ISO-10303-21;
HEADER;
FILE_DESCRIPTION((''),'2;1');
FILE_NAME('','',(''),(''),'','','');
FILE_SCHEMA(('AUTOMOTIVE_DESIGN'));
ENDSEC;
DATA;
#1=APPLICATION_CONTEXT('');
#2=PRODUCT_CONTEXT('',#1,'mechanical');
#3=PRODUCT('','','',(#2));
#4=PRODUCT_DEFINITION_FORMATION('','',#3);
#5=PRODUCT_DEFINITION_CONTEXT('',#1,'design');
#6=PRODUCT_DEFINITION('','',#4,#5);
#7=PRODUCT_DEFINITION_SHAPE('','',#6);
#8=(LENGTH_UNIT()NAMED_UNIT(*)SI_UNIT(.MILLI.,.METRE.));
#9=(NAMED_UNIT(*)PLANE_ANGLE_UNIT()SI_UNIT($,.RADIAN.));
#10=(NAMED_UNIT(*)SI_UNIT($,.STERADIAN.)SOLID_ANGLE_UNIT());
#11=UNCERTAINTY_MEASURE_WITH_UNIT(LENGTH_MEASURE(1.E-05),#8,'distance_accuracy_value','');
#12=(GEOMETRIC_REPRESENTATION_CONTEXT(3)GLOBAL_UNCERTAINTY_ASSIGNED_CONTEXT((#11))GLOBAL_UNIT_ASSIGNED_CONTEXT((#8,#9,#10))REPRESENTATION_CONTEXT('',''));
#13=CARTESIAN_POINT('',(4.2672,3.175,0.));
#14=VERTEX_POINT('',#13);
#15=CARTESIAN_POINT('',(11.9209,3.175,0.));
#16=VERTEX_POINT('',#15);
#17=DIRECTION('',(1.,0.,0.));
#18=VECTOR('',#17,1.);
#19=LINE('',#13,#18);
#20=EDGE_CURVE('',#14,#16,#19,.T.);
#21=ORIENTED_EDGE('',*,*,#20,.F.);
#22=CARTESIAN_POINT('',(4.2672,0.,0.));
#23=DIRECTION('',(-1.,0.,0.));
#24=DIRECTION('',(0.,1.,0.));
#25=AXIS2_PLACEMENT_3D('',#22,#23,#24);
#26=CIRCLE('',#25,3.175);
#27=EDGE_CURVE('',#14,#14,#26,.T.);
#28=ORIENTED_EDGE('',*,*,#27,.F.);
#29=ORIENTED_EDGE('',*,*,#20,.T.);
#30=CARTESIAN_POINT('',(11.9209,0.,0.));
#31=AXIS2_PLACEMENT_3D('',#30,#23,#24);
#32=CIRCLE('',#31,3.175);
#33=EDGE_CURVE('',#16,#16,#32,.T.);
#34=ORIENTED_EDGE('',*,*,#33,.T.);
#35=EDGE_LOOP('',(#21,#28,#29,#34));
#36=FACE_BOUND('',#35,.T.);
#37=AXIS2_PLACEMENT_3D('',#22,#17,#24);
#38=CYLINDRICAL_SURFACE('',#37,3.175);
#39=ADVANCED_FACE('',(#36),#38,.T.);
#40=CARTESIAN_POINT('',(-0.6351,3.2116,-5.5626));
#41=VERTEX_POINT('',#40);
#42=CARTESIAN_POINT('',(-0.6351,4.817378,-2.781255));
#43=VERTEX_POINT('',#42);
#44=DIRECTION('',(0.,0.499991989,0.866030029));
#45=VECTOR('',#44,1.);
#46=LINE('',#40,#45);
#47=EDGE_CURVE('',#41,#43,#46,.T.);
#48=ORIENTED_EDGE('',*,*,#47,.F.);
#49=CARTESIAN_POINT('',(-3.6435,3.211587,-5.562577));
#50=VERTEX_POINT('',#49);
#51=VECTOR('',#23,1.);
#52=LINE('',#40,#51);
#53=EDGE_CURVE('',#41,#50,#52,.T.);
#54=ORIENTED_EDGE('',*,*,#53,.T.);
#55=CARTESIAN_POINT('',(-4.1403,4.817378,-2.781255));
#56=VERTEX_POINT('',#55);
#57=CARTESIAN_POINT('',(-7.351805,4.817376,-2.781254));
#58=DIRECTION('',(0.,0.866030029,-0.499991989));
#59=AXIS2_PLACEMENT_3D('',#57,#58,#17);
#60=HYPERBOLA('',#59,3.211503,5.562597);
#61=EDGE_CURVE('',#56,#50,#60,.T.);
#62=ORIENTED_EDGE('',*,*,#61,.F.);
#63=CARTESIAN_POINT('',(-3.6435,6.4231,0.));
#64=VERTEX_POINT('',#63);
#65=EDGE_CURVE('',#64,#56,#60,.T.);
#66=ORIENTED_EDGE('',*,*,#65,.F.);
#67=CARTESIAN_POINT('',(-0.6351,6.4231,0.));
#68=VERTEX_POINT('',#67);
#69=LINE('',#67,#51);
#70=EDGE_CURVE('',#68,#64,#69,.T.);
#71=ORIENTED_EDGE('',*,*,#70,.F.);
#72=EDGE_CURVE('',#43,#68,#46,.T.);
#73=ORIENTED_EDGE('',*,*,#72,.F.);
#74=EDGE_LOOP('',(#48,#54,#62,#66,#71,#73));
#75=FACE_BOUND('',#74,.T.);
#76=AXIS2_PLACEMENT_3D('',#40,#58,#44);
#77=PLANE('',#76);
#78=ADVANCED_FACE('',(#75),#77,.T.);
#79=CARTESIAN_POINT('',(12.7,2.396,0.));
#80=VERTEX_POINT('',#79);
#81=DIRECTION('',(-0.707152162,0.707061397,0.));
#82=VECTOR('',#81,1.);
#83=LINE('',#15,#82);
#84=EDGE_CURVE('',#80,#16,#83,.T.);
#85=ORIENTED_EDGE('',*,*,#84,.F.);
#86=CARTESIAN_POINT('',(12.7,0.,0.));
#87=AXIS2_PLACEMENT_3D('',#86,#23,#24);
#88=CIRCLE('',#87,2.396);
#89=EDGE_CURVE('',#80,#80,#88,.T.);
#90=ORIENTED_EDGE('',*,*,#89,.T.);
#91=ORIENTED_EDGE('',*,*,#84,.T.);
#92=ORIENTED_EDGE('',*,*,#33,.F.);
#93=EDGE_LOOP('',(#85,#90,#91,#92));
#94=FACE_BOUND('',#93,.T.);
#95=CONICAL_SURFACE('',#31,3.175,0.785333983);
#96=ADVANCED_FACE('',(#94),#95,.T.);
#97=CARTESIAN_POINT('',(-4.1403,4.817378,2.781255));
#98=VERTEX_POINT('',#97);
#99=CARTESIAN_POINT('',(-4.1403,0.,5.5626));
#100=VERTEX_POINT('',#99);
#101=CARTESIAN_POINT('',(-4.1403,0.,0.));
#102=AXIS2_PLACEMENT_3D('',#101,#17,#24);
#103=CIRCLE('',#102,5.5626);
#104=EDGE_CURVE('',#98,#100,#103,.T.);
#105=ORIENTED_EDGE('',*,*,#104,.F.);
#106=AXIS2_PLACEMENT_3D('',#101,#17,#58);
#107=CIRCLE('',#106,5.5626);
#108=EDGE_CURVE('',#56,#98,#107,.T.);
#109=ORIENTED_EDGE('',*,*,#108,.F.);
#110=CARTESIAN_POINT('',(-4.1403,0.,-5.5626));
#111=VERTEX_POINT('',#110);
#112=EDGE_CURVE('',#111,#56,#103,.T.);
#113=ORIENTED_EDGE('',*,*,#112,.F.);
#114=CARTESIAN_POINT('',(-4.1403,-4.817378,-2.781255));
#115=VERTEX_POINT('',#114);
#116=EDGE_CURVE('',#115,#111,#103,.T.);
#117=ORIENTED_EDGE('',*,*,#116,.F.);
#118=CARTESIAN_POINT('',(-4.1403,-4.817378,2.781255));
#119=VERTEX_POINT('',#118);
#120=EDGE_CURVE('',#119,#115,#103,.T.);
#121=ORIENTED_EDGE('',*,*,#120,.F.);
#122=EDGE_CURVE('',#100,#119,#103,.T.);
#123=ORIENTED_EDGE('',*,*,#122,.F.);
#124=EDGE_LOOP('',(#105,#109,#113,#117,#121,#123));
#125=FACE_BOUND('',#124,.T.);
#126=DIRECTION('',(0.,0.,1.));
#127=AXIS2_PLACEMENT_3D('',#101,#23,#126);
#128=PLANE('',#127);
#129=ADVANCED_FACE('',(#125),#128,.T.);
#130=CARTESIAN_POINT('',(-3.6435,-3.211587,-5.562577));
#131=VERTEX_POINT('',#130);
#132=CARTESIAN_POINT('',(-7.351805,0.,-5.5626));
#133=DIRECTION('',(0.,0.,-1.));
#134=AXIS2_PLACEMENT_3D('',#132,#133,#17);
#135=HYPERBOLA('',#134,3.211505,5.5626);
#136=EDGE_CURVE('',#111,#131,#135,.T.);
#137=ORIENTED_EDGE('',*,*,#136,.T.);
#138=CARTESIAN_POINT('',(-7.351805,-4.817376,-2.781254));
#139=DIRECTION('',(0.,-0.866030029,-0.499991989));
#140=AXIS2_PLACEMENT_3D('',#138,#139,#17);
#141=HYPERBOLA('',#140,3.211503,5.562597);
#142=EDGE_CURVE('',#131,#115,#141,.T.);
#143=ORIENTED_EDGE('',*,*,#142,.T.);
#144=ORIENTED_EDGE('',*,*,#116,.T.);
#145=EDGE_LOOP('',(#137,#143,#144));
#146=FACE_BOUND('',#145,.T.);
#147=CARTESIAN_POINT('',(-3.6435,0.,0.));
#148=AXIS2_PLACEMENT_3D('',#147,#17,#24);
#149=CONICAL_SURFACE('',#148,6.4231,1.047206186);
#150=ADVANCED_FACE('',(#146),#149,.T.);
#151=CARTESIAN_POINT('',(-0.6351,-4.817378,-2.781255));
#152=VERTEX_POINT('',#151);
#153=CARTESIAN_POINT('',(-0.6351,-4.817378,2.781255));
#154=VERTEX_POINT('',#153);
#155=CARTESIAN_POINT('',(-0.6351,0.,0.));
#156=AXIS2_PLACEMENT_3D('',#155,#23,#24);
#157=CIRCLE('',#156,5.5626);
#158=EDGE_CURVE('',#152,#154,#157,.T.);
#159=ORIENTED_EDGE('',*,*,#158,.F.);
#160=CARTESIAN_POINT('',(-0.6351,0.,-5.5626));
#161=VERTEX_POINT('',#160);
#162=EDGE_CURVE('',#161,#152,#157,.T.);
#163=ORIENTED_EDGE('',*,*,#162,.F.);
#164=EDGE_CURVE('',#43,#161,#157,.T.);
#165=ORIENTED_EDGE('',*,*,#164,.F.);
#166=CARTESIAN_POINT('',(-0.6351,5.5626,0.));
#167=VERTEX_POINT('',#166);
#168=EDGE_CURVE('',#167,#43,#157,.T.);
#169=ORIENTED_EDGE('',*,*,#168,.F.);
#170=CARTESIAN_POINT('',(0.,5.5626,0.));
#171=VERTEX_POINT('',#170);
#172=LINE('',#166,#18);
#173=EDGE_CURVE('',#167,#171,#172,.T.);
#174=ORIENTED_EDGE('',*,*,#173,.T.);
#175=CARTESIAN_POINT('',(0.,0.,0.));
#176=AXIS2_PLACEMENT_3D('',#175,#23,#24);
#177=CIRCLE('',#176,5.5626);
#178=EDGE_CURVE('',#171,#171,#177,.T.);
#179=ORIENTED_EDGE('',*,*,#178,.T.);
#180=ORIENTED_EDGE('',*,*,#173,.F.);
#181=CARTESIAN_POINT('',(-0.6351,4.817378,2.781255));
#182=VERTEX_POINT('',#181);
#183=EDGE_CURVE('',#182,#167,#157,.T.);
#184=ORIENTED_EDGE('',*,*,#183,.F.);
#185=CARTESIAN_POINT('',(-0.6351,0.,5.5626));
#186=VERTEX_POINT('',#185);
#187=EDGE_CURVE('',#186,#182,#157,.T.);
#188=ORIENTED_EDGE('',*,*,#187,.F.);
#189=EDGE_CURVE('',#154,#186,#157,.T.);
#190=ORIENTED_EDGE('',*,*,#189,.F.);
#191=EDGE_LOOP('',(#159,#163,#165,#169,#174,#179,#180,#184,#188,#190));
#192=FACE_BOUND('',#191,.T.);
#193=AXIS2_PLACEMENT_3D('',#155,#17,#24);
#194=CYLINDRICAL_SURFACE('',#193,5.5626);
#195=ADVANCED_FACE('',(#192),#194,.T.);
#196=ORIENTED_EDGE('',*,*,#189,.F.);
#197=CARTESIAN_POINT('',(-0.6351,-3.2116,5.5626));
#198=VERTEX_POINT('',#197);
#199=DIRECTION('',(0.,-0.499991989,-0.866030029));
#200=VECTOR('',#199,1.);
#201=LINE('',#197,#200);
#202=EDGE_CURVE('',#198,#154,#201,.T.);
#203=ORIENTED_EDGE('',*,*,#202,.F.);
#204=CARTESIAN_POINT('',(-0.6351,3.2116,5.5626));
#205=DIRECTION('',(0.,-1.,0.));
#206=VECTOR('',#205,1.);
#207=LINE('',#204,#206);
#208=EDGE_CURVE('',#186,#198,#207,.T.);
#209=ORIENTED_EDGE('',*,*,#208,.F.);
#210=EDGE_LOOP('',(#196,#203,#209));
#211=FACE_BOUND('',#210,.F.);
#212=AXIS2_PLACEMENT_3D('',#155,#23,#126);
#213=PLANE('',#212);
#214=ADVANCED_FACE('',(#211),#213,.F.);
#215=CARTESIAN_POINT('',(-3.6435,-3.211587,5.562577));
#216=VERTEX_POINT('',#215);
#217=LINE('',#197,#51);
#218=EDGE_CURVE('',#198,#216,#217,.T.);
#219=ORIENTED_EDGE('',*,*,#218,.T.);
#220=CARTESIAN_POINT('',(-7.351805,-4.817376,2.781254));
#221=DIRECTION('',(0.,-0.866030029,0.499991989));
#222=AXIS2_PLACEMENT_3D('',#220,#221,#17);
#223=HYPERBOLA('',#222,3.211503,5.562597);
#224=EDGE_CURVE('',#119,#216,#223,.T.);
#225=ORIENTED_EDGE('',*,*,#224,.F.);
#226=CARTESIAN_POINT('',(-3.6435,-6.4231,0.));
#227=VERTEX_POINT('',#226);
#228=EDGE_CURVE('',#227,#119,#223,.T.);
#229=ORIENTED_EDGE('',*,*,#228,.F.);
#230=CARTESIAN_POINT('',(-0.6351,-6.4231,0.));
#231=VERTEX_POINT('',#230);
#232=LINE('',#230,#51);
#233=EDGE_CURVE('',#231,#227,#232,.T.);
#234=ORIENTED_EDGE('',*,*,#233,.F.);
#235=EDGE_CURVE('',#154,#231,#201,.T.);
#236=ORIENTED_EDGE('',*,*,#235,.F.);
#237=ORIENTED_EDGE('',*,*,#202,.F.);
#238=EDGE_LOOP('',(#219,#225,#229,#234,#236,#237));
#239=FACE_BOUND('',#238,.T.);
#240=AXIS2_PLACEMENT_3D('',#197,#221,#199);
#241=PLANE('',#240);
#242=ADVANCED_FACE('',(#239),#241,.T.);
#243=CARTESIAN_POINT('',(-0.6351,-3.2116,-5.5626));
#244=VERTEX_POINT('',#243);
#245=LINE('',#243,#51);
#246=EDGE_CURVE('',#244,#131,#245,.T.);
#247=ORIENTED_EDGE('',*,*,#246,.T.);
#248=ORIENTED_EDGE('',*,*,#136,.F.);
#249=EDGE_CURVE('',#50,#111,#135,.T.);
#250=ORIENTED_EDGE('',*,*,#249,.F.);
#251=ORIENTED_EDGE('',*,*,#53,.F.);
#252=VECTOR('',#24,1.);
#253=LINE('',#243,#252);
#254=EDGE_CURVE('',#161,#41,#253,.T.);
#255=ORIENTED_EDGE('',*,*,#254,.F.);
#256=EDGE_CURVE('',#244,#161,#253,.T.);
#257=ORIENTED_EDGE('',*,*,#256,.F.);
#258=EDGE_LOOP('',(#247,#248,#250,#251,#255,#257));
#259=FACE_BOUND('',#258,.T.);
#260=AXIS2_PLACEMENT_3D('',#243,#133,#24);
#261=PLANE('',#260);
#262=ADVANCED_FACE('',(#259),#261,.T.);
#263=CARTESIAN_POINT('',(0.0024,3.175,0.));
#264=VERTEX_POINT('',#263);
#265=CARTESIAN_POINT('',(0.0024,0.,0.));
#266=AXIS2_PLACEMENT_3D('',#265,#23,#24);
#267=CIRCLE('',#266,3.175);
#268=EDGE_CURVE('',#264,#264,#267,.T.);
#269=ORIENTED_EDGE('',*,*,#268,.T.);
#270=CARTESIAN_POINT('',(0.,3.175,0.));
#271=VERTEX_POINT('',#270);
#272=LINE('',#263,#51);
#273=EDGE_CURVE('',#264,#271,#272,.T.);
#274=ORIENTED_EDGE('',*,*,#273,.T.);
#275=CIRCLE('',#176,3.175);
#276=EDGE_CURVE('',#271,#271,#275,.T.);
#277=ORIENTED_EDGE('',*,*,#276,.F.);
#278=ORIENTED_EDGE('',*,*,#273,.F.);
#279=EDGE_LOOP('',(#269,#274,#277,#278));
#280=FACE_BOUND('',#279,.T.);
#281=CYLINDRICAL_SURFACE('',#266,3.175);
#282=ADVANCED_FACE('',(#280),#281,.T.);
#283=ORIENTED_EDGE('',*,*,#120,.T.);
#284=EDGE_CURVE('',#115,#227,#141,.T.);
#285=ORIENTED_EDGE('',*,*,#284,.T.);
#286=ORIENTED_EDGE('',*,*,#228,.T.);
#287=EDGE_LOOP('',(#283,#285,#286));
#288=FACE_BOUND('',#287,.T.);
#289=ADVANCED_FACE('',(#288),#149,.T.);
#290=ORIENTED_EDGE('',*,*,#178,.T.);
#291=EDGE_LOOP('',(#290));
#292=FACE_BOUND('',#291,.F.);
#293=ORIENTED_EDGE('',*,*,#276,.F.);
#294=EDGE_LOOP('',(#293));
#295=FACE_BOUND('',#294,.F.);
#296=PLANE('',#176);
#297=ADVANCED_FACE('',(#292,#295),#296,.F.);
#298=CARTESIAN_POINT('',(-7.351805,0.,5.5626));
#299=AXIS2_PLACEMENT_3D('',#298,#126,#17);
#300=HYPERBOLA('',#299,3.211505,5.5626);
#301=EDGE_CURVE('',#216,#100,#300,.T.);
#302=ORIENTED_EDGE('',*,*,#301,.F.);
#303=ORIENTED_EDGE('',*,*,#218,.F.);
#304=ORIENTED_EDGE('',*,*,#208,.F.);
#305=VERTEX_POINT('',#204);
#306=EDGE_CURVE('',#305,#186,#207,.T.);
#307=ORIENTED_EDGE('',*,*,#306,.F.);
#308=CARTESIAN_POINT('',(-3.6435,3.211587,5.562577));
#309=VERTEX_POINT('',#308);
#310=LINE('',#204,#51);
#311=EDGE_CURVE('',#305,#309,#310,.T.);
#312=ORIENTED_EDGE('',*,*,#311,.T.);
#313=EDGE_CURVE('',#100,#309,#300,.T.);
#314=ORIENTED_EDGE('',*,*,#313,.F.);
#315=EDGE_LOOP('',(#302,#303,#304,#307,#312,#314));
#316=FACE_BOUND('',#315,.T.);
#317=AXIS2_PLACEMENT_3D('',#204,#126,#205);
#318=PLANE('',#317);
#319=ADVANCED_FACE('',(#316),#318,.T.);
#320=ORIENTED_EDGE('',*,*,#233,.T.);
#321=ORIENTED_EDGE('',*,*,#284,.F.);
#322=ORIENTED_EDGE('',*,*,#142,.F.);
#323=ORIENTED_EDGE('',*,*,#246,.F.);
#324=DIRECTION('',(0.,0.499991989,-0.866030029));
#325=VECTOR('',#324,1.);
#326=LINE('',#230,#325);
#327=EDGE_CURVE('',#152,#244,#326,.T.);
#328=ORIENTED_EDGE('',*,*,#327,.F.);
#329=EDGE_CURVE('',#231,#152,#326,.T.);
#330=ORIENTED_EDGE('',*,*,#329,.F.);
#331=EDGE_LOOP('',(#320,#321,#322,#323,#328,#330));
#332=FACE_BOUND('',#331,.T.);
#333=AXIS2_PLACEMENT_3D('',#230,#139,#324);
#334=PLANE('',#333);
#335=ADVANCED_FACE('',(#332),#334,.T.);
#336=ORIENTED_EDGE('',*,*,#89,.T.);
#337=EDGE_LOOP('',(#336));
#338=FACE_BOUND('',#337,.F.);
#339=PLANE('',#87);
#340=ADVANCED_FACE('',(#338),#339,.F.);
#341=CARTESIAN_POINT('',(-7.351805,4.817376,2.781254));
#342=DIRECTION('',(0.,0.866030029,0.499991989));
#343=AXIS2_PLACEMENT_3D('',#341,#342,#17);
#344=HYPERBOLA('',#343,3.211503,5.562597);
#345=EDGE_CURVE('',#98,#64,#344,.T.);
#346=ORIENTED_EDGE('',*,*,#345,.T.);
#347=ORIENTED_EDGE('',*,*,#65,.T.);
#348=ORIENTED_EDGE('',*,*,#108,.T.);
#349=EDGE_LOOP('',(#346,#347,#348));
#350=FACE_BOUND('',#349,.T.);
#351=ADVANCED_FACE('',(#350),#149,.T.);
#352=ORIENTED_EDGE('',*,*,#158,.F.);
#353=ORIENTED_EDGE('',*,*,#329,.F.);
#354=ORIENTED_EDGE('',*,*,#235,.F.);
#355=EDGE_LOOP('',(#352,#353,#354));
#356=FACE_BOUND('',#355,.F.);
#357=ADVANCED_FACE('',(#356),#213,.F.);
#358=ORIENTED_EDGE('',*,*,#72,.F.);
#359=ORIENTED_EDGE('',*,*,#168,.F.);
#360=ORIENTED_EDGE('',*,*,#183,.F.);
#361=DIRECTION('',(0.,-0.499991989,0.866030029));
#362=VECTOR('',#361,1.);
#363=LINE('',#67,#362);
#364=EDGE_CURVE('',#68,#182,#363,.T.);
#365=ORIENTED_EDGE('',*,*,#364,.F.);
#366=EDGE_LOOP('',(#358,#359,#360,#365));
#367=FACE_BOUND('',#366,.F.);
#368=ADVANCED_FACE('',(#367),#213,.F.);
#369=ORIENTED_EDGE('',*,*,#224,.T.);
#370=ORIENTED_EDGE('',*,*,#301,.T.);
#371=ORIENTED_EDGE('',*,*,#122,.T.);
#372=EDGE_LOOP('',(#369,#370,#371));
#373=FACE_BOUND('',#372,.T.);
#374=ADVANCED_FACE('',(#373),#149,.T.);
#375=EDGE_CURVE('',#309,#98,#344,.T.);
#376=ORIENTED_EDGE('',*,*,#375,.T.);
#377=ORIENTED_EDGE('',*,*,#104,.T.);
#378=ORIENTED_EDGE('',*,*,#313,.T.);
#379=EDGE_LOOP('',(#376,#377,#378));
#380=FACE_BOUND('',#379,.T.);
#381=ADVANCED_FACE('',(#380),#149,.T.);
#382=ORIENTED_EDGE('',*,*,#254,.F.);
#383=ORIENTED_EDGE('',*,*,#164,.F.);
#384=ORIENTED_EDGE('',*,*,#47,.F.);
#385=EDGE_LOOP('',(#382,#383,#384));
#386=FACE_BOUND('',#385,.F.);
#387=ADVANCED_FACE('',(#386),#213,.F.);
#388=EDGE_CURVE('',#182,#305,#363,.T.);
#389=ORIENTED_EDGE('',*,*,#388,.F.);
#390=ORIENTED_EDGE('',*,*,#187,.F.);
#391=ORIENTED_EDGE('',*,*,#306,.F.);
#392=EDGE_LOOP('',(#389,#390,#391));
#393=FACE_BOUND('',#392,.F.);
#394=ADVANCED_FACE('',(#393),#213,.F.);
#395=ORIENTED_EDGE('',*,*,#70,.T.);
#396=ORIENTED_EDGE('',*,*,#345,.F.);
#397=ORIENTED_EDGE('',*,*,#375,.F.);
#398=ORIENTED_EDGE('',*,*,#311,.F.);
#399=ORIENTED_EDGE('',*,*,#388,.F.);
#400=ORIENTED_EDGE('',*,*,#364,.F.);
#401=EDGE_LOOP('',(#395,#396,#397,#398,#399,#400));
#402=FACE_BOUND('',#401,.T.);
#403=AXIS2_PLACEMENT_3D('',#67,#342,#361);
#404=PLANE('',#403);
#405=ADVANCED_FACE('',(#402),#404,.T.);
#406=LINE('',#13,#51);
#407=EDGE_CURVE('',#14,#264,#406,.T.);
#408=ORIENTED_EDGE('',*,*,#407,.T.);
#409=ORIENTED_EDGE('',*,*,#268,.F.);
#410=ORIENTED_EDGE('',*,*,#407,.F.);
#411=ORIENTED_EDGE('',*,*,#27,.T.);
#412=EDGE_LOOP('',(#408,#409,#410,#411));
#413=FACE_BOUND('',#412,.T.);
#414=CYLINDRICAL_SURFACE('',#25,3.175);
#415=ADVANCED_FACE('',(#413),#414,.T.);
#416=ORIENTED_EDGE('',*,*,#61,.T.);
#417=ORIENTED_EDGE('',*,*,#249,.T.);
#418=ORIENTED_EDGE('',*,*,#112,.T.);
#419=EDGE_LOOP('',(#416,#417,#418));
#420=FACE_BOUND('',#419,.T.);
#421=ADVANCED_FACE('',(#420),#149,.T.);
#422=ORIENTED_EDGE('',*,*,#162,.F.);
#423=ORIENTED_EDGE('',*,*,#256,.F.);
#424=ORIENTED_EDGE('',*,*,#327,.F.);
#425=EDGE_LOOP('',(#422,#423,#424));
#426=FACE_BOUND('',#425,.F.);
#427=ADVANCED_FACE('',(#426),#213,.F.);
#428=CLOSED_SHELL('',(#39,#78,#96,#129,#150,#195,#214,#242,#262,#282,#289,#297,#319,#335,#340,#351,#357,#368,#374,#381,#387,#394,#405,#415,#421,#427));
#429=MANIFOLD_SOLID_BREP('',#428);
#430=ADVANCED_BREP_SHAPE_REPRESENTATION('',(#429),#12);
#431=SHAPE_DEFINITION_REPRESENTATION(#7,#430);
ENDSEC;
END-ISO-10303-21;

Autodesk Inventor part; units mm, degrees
ref_plane "YZ Plane" through (0, 0, 0) normal (1, 0, 0) x (0, 1, 0)
ref_plane "XZ Plane" through (0, 0, 0) normal (0, 1, 0) x (-1, 0, 0)
sketch "Sketch1" plane through (0, 0, 0) normal (0, 0, 1) x (1, 0, 0)
  line L0 (0, 5.5626) -> (0, 3.175)
  line L1 (4.2672, 3.175) -> (12.7, 3.175)
  line L2 (12.7, 3.175) -> (12.7, 0)
  line L3 (12.7, 0) -> (-0.6351, 0)
  line L4 (-3.3021, 0) -> (15.367, 0) projected
  line L5 (-0.6351, 0) -> (-0.6351, 5.5626)
  line L6 (-0.6351, 5.5626) -> (0, 5.5626)
  line L7 (4.2672, 3.175) -> (0.0024, 3.175)
  line L8 (0.0024, 3.175) -> (0, 3.175)
  line L9 (0, -1.1125) -> (0, 6.6751) projected
  dimension "d0" = 12.7
  dimension "d1" = 8.4328
  dimension "d2" = 6.35
  dimension "d9" = 0.6351
  dimension "d10" = 11.1252
  dimension "d13" = 4.2648
  dimension "d14" = 6.35
revolve "Body" add sketch "Sketch1" angle 360 about axis through (12.7, 0, 0) along (-1, 0, 0)
sketch "Sketch2" plane through (-0.6351, 0, 0) normal (-1, 0, 0) x (0, 0, 1)
  line L0 (0, 6.4231) -> (5.5626, 3.2116)
  line L1 (5.5626, 3.2116) -> (5.5626, -3.2116)
  line L2 (5.5626, -3.2116) -> (0, -6.4231)
  line L3 (0, -6.4231) -> (-5.5626, -3.2116)
  line L4 (-5.5626, -3.2116) -> (-5.5626, 3.2116)
  line L5 (-5.5626, 3.2116) -> (0, 6.4231)
  point P0 (0, 0)
  point P1 (0, 0)
  dimension "d11" = 11.1252
extrude "Head" add sketch "Sketch2" along normal blind 3.5052
sketch "Sketch4" plane through (0, 0, 0) normal (0, 0, 1) x (1, 0, 0)
  line L0 (-4.1403, 5.5626) -> (-4.1403, 6.4231)
  line L1 (-4.1403, 6.4231) -> (-3.6435, 6.4231)
  line L2 (-3.6435, 6.4231) -> (-4.1403, 5.5626)
  line L3 (-4.8413, 0) -> (0.0659, 0) projected
  line L4 (-0.6351, 6.4231) -> (-4.1403, 6.4231) projected
  line L5 (-4.1403, 3.2116) -> (-4.1403, 6.4231) projected
  dimension "d5" = 30
  dimension "d19" = 11.1252
revolve "Chamfer1" cut sketch "Sketch4" angle 360 about axis through (-10, 0, 0) along (1, 0, 0)
thread "Thread" size "1/4-20 UNC" class "2A" standard "ANSI Unified Screw Threads" length 8.4328
chamfer "Chamfer2" distance 0.779 distance2 0.7791 1 edges at (12.7, -3.175, 0) measured on face at (12.7, -1.1281, 0.661)
ref_plane "Work Plane1" through (1.525, 0, 0) normal (0, 0, 1) x (1, 0, 0)
equation "\"d0\" = NLG"
equation "\"d1\" = GEL"
equation "\"d2\" = GD"
equation "\"d10\" = SD2"
equation "\"d14\" = BDM"
equation "\"d11\" = SW"
equation "\"d3\" = KOH - SD"
equation "\"d5\" = ANG1"
equation "\"d19\" = SW0"
equation "\"d15\" = GEL"
equation "\"d6\" = -0.5 * SPD + 0.5 * GD"
equation "\"NLG\" = 12.7"
equation "\"GD\" = 6.35"
equation "\"BDM\" = 6.35"
equation "\"KOH\" = 4.1402"
equation "\"GEL\" = 8.4328"
equation "\"SW\" = 11.1252"
equation "\"SW0\" = SW"
equation "\"SPD\" = GD1"
equation "\"SD2\" = SW"
equation "\"SD\" = 0.635"
equation "\"ANG1\" = 30deg"
equation "\"GAL\" = 4.26466"
equation "\"GUL\" = 0.77902"
equation "\"RR\" = 0.381"
equation "\"WFT\" = SD"
equation "\"GD1\" = 4.79196"
equation "\"THREADDIA\" = 6.35"
equation "\"SDH\" = SW"
equation "\"SDHG\" = 0.00254"
equation "\"TOA\" = 30deg"
equation "\"FAWI\" = 45deg"
equation "\"NND\" = 6.35"
equation "\"E0\" = 12.84961"
properties part number "AS 2465 - 1/4 x 1/2  UNC" material "Steel, Mild"
